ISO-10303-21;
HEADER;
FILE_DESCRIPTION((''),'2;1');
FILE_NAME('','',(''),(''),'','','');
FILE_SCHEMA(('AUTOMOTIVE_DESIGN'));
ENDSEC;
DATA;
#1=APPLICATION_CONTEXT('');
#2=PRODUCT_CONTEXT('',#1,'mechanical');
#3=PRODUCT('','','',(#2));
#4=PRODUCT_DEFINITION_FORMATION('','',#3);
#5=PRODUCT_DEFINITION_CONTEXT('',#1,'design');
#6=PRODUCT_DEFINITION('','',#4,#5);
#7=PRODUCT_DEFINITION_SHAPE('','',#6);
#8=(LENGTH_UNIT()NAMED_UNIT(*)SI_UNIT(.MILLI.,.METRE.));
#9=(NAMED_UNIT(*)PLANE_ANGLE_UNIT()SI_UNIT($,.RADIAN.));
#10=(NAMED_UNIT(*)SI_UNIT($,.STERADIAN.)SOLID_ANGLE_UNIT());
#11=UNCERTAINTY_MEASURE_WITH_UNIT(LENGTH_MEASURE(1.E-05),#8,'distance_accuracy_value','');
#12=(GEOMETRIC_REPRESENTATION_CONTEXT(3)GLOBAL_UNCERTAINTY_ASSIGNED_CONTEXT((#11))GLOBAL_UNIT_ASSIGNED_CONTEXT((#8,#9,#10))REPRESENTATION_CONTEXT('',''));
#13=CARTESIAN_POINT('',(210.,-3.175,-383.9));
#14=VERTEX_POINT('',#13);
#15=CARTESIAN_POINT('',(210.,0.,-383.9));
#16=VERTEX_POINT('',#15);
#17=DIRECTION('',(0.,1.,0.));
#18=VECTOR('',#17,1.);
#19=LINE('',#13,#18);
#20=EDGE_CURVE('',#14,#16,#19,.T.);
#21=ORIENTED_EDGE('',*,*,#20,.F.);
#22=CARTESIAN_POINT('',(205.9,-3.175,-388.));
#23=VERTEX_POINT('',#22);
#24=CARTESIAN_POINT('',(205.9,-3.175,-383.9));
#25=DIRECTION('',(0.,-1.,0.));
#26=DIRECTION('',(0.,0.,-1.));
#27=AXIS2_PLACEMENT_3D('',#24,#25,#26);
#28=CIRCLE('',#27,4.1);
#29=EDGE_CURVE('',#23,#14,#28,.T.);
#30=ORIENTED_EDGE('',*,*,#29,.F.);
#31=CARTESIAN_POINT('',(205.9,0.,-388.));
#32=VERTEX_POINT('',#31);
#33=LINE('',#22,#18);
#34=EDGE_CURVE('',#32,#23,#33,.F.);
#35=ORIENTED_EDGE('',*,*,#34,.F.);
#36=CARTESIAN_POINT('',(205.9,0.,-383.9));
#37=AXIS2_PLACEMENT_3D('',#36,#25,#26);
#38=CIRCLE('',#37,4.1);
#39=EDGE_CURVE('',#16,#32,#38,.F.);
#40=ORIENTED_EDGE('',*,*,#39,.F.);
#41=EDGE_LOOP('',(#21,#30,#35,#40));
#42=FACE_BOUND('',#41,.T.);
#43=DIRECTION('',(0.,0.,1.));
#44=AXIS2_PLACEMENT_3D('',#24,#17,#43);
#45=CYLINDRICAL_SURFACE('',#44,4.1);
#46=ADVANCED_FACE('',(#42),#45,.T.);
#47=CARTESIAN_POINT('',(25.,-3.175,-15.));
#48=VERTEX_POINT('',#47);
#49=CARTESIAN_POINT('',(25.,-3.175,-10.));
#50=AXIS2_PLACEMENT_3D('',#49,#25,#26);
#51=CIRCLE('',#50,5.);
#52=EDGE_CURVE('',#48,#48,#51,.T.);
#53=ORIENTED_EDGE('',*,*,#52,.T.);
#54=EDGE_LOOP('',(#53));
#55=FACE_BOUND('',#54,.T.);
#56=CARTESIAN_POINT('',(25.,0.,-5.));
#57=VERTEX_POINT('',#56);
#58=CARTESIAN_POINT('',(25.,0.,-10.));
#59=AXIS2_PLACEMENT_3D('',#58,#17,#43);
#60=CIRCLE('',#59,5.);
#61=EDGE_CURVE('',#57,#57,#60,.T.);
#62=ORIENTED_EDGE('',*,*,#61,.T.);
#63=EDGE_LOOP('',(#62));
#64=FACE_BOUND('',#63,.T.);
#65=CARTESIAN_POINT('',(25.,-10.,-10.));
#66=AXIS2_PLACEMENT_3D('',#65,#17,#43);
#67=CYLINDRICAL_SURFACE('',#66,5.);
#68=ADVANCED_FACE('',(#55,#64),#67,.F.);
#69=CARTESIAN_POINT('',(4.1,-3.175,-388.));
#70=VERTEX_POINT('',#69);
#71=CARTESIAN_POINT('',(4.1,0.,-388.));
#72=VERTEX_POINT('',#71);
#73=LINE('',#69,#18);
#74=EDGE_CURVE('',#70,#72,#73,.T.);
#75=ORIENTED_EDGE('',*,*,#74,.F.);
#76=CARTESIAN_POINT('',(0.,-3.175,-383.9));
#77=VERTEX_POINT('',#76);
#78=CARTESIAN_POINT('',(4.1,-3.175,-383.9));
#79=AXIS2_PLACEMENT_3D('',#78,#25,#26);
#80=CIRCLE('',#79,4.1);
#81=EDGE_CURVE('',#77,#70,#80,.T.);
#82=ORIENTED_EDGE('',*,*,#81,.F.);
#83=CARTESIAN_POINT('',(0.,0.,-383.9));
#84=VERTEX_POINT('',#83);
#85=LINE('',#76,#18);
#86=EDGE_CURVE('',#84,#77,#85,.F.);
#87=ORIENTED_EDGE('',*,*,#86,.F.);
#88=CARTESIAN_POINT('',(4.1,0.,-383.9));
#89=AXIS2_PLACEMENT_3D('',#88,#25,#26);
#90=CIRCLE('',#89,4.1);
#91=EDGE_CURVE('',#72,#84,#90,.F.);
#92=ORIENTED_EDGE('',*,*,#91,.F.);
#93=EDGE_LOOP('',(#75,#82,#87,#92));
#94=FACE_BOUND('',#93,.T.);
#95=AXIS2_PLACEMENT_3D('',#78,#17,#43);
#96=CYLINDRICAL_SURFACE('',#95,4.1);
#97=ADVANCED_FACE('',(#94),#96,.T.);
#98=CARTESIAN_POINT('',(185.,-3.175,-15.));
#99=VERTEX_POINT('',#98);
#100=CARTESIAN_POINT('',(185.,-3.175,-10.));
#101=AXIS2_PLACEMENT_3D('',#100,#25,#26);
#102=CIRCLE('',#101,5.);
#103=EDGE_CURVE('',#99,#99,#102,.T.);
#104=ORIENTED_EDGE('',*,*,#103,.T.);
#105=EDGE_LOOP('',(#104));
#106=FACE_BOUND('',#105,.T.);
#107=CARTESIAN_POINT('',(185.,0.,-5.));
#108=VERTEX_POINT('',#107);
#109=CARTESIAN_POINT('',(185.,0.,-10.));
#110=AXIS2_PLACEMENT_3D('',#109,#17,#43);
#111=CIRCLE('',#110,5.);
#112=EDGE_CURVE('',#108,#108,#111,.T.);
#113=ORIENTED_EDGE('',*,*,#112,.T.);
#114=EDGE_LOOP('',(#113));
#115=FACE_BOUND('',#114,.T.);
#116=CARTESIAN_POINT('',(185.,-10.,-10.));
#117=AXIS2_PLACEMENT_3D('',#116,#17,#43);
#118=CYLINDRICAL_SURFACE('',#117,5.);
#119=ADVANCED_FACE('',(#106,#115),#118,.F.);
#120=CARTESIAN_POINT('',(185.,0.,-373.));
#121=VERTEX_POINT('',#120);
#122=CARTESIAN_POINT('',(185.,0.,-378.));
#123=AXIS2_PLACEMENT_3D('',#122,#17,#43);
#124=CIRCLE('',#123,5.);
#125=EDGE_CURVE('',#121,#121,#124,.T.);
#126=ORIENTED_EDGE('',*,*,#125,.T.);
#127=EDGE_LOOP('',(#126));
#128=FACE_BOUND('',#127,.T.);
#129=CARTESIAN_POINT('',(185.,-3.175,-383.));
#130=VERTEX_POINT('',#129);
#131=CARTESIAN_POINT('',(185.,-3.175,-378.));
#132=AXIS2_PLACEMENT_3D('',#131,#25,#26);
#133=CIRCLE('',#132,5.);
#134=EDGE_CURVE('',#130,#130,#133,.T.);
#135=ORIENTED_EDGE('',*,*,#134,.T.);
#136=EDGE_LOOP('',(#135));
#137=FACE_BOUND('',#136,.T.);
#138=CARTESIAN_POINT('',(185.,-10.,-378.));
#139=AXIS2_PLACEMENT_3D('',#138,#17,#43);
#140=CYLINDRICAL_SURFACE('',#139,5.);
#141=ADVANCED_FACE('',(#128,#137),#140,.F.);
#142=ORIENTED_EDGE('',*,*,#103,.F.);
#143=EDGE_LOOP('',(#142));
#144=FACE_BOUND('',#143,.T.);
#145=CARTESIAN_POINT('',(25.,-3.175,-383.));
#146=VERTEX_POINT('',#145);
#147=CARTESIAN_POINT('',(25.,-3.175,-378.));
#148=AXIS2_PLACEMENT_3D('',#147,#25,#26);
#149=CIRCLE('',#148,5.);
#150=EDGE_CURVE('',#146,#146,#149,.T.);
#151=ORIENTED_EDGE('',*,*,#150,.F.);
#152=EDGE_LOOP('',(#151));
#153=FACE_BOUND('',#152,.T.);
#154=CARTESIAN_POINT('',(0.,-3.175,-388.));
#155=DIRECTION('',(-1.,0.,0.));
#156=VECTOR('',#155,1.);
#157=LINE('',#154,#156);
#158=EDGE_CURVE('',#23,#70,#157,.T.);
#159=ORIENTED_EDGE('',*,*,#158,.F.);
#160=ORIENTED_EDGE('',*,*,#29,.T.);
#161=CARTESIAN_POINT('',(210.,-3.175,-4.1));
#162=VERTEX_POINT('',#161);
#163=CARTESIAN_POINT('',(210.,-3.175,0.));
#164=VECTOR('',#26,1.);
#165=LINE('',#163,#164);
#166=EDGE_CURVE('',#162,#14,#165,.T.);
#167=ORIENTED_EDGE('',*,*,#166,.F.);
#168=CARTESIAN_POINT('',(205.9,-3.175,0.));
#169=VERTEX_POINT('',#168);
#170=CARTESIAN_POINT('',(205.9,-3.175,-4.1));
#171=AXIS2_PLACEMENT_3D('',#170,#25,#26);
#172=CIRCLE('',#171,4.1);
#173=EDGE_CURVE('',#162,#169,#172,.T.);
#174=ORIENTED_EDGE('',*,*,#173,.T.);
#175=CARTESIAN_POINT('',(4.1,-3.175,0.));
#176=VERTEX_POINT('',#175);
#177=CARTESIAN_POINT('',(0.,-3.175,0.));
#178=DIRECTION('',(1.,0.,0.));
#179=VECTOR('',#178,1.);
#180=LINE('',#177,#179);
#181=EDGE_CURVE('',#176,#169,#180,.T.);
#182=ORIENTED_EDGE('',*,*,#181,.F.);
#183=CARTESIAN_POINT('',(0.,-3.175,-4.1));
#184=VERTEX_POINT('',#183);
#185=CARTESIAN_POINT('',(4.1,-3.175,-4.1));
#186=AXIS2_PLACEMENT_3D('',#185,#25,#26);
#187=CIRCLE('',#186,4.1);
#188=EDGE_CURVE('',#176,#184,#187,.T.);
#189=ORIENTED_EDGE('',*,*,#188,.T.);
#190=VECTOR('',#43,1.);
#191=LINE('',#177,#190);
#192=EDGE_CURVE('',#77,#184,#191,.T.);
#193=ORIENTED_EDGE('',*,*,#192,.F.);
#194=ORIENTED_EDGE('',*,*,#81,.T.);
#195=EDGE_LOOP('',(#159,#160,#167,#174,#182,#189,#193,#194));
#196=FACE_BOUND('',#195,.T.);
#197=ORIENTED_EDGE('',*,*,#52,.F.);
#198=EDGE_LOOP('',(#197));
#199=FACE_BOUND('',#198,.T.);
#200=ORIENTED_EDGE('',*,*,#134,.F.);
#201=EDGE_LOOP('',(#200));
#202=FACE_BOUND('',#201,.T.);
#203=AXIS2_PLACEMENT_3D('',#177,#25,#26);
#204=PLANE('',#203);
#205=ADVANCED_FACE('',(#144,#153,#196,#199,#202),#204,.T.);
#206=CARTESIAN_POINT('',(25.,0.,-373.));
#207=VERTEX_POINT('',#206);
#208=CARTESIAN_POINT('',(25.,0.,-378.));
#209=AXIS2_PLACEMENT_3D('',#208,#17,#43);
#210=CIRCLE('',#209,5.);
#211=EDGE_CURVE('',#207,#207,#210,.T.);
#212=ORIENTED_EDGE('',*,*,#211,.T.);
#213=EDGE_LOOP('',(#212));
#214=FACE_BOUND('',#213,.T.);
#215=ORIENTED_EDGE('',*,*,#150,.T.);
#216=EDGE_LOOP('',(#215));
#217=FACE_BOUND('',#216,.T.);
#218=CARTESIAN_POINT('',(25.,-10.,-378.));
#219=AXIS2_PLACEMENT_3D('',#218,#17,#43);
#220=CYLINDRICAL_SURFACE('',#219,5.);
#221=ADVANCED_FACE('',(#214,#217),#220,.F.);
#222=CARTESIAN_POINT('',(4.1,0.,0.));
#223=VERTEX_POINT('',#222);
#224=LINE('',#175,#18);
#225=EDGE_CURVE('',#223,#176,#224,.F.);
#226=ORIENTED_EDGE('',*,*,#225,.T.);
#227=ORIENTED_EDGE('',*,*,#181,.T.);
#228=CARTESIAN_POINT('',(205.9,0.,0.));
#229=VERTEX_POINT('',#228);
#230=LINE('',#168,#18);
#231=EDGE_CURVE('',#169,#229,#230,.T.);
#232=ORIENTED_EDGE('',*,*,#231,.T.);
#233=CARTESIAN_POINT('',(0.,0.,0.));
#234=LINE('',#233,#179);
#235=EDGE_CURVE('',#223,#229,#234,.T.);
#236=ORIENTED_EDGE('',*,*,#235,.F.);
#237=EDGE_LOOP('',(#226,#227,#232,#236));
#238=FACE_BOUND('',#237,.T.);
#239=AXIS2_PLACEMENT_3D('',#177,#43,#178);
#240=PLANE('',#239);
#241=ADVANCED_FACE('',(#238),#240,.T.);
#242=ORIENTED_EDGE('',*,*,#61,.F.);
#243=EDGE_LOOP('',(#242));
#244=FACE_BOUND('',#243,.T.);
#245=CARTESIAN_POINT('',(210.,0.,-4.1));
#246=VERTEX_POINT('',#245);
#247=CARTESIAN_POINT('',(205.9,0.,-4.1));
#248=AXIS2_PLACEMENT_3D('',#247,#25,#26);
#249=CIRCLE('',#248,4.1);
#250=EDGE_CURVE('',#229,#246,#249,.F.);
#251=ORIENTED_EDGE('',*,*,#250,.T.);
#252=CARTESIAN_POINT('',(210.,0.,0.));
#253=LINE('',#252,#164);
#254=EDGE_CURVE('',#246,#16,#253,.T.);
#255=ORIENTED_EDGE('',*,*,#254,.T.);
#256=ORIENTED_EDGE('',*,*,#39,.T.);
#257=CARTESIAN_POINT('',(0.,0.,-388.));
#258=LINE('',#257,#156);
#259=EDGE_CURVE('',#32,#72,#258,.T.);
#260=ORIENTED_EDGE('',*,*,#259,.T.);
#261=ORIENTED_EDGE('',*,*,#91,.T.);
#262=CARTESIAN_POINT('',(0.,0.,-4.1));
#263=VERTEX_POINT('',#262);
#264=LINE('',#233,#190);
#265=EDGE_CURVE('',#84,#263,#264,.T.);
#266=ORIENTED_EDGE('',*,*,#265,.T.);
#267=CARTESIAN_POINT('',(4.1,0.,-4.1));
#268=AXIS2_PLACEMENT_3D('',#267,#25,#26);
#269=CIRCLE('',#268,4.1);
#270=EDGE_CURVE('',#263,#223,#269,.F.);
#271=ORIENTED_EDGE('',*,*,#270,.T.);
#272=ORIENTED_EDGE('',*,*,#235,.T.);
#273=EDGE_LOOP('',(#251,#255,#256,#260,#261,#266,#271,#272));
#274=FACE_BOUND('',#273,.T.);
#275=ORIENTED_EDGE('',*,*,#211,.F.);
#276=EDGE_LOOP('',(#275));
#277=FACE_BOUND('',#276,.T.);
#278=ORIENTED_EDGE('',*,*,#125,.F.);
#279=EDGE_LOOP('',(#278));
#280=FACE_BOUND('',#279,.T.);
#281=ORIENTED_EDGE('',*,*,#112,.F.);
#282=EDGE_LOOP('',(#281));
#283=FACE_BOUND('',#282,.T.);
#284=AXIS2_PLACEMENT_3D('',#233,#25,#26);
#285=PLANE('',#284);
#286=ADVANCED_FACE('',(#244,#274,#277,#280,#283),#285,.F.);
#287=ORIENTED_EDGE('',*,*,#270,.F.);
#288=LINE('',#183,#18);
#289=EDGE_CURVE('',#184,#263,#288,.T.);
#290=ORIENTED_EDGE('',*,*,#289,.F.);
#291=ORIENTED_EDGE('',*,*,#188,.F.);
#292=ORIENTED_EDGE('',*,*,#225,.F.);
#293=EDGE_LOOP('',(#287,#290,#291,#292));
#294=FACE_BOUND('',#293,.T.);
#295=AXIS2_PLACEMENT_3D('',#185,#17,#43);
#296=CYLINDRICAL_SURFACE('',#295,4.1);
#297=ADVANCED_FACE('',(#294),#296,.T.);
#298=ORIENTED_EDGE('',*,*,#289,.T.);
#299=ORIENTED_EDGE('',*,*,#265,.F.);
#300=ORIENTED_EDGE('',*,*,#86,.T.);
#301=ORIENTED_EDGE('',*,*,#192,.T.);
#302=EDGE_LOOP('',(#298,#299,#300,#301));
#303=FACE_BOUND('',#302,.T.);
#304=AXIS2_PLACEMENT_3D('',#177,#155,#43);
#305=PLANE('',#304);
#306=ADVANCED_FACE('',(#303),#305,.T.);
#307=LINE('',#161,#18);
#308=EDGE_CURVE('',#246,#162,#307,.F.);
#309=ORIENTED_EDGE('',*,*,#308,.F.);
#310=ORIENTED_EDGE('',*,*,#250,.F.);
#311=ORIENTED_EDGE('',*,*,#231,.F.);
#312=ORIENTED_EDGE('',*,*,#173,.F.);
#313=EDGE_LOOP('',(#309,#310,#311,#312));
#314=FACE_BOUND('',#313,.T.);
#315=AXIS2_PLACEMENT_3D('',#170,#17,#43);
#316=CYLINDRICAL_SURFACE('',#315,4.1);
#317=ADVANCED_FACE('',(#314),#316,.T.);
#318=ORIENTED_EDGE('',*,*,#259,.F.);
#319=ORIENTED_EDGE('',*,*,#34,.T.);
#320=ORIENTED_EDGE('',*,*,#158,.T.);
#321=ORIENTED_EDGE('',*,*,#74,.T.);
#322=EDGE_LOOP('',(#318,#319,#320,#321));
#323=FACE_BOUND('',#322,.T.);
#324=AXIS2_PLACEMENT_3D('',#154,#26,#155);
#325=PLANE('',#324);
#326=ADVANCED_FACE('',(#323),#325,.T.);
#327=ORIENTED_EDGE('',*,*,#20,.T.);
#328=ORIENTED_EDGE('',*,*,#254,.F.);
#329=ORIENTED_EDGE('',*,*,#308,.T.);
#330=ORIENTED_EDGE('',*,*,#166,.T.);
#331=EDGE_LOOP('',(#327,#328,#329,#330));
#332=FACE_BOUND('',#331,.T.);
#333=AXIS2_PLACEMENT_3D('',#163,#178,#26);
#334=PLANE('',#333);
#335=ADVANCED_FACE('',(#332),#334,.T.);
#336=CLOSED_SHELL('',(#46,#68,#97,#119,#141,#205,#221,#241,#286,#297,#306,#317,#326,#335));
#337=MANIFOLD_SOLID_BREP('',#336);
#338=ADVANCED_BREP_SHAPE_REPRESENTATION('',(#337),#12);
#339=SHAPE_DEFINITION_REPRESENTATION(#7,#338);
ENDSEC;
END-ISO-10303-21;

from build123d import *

# Parameters (mm, degrees)
SKETCH1_W          = 210
SKETCH1_H          = 388
BASE_FLANGE1_DEPTH = 3.175
FILLET1_R          = 4.1
SKETCH6_R          = 5
CUT_EXTRUDE1_DEPTH = 10


# Sheet-metal steps are written as plain solids
with BuildPart() as part:
    # Sketch1 → Base-Flange1 (new body)
    with BuildSketch(Plane(origin=(0, 0, 0), x_dir=(1, 0, 0), z_dir=(0, 1, 0))):
        with Locations((105, 194)):
            Rectangle(SKETCH1_W, SKETCH1_H)
    extrude(amount=-BASE_FLANGE1_DEPTH)

    # Fillet1
    fillet1_edges = [part.edges().sort_by_distance(p)[0] for p in [
        (0, -1.5875, -388),
        (210, -1.5875, -388),
        (210, -1.5875, 0),
        (0, -1.5875, 0),
    ]]
    fillet(fillet1_edges, radius=FILLET1_R)

    # Sketch6 → Cut-Extrude1 (cut)
    with BuildSketch(Plane(origin=(0, 0, 0), x_dir=(1, 0, 0), z_dir=(0, 1, 0))):
        with Locations(Location((25, 378, 0), (0, 0, 270))):
            Circle(SKETCH6_R)
        with Locations(Location((185, 378, 0), (0, 0, 270))):
            Circle(SKETCH6_R)
        with Locations(Location((185, 10, 0), (0, 0, 270))):
            Circle(SKETCH6_R)
        with Locations(Location((25, 10, 0), (0, 0, 270))):
            Circle(SKETCH6_R)
    extrude(amount=-CUT_EXTRUDE1_DEPTH, mode=Mode.SUBTRACT)


solid = part.part
